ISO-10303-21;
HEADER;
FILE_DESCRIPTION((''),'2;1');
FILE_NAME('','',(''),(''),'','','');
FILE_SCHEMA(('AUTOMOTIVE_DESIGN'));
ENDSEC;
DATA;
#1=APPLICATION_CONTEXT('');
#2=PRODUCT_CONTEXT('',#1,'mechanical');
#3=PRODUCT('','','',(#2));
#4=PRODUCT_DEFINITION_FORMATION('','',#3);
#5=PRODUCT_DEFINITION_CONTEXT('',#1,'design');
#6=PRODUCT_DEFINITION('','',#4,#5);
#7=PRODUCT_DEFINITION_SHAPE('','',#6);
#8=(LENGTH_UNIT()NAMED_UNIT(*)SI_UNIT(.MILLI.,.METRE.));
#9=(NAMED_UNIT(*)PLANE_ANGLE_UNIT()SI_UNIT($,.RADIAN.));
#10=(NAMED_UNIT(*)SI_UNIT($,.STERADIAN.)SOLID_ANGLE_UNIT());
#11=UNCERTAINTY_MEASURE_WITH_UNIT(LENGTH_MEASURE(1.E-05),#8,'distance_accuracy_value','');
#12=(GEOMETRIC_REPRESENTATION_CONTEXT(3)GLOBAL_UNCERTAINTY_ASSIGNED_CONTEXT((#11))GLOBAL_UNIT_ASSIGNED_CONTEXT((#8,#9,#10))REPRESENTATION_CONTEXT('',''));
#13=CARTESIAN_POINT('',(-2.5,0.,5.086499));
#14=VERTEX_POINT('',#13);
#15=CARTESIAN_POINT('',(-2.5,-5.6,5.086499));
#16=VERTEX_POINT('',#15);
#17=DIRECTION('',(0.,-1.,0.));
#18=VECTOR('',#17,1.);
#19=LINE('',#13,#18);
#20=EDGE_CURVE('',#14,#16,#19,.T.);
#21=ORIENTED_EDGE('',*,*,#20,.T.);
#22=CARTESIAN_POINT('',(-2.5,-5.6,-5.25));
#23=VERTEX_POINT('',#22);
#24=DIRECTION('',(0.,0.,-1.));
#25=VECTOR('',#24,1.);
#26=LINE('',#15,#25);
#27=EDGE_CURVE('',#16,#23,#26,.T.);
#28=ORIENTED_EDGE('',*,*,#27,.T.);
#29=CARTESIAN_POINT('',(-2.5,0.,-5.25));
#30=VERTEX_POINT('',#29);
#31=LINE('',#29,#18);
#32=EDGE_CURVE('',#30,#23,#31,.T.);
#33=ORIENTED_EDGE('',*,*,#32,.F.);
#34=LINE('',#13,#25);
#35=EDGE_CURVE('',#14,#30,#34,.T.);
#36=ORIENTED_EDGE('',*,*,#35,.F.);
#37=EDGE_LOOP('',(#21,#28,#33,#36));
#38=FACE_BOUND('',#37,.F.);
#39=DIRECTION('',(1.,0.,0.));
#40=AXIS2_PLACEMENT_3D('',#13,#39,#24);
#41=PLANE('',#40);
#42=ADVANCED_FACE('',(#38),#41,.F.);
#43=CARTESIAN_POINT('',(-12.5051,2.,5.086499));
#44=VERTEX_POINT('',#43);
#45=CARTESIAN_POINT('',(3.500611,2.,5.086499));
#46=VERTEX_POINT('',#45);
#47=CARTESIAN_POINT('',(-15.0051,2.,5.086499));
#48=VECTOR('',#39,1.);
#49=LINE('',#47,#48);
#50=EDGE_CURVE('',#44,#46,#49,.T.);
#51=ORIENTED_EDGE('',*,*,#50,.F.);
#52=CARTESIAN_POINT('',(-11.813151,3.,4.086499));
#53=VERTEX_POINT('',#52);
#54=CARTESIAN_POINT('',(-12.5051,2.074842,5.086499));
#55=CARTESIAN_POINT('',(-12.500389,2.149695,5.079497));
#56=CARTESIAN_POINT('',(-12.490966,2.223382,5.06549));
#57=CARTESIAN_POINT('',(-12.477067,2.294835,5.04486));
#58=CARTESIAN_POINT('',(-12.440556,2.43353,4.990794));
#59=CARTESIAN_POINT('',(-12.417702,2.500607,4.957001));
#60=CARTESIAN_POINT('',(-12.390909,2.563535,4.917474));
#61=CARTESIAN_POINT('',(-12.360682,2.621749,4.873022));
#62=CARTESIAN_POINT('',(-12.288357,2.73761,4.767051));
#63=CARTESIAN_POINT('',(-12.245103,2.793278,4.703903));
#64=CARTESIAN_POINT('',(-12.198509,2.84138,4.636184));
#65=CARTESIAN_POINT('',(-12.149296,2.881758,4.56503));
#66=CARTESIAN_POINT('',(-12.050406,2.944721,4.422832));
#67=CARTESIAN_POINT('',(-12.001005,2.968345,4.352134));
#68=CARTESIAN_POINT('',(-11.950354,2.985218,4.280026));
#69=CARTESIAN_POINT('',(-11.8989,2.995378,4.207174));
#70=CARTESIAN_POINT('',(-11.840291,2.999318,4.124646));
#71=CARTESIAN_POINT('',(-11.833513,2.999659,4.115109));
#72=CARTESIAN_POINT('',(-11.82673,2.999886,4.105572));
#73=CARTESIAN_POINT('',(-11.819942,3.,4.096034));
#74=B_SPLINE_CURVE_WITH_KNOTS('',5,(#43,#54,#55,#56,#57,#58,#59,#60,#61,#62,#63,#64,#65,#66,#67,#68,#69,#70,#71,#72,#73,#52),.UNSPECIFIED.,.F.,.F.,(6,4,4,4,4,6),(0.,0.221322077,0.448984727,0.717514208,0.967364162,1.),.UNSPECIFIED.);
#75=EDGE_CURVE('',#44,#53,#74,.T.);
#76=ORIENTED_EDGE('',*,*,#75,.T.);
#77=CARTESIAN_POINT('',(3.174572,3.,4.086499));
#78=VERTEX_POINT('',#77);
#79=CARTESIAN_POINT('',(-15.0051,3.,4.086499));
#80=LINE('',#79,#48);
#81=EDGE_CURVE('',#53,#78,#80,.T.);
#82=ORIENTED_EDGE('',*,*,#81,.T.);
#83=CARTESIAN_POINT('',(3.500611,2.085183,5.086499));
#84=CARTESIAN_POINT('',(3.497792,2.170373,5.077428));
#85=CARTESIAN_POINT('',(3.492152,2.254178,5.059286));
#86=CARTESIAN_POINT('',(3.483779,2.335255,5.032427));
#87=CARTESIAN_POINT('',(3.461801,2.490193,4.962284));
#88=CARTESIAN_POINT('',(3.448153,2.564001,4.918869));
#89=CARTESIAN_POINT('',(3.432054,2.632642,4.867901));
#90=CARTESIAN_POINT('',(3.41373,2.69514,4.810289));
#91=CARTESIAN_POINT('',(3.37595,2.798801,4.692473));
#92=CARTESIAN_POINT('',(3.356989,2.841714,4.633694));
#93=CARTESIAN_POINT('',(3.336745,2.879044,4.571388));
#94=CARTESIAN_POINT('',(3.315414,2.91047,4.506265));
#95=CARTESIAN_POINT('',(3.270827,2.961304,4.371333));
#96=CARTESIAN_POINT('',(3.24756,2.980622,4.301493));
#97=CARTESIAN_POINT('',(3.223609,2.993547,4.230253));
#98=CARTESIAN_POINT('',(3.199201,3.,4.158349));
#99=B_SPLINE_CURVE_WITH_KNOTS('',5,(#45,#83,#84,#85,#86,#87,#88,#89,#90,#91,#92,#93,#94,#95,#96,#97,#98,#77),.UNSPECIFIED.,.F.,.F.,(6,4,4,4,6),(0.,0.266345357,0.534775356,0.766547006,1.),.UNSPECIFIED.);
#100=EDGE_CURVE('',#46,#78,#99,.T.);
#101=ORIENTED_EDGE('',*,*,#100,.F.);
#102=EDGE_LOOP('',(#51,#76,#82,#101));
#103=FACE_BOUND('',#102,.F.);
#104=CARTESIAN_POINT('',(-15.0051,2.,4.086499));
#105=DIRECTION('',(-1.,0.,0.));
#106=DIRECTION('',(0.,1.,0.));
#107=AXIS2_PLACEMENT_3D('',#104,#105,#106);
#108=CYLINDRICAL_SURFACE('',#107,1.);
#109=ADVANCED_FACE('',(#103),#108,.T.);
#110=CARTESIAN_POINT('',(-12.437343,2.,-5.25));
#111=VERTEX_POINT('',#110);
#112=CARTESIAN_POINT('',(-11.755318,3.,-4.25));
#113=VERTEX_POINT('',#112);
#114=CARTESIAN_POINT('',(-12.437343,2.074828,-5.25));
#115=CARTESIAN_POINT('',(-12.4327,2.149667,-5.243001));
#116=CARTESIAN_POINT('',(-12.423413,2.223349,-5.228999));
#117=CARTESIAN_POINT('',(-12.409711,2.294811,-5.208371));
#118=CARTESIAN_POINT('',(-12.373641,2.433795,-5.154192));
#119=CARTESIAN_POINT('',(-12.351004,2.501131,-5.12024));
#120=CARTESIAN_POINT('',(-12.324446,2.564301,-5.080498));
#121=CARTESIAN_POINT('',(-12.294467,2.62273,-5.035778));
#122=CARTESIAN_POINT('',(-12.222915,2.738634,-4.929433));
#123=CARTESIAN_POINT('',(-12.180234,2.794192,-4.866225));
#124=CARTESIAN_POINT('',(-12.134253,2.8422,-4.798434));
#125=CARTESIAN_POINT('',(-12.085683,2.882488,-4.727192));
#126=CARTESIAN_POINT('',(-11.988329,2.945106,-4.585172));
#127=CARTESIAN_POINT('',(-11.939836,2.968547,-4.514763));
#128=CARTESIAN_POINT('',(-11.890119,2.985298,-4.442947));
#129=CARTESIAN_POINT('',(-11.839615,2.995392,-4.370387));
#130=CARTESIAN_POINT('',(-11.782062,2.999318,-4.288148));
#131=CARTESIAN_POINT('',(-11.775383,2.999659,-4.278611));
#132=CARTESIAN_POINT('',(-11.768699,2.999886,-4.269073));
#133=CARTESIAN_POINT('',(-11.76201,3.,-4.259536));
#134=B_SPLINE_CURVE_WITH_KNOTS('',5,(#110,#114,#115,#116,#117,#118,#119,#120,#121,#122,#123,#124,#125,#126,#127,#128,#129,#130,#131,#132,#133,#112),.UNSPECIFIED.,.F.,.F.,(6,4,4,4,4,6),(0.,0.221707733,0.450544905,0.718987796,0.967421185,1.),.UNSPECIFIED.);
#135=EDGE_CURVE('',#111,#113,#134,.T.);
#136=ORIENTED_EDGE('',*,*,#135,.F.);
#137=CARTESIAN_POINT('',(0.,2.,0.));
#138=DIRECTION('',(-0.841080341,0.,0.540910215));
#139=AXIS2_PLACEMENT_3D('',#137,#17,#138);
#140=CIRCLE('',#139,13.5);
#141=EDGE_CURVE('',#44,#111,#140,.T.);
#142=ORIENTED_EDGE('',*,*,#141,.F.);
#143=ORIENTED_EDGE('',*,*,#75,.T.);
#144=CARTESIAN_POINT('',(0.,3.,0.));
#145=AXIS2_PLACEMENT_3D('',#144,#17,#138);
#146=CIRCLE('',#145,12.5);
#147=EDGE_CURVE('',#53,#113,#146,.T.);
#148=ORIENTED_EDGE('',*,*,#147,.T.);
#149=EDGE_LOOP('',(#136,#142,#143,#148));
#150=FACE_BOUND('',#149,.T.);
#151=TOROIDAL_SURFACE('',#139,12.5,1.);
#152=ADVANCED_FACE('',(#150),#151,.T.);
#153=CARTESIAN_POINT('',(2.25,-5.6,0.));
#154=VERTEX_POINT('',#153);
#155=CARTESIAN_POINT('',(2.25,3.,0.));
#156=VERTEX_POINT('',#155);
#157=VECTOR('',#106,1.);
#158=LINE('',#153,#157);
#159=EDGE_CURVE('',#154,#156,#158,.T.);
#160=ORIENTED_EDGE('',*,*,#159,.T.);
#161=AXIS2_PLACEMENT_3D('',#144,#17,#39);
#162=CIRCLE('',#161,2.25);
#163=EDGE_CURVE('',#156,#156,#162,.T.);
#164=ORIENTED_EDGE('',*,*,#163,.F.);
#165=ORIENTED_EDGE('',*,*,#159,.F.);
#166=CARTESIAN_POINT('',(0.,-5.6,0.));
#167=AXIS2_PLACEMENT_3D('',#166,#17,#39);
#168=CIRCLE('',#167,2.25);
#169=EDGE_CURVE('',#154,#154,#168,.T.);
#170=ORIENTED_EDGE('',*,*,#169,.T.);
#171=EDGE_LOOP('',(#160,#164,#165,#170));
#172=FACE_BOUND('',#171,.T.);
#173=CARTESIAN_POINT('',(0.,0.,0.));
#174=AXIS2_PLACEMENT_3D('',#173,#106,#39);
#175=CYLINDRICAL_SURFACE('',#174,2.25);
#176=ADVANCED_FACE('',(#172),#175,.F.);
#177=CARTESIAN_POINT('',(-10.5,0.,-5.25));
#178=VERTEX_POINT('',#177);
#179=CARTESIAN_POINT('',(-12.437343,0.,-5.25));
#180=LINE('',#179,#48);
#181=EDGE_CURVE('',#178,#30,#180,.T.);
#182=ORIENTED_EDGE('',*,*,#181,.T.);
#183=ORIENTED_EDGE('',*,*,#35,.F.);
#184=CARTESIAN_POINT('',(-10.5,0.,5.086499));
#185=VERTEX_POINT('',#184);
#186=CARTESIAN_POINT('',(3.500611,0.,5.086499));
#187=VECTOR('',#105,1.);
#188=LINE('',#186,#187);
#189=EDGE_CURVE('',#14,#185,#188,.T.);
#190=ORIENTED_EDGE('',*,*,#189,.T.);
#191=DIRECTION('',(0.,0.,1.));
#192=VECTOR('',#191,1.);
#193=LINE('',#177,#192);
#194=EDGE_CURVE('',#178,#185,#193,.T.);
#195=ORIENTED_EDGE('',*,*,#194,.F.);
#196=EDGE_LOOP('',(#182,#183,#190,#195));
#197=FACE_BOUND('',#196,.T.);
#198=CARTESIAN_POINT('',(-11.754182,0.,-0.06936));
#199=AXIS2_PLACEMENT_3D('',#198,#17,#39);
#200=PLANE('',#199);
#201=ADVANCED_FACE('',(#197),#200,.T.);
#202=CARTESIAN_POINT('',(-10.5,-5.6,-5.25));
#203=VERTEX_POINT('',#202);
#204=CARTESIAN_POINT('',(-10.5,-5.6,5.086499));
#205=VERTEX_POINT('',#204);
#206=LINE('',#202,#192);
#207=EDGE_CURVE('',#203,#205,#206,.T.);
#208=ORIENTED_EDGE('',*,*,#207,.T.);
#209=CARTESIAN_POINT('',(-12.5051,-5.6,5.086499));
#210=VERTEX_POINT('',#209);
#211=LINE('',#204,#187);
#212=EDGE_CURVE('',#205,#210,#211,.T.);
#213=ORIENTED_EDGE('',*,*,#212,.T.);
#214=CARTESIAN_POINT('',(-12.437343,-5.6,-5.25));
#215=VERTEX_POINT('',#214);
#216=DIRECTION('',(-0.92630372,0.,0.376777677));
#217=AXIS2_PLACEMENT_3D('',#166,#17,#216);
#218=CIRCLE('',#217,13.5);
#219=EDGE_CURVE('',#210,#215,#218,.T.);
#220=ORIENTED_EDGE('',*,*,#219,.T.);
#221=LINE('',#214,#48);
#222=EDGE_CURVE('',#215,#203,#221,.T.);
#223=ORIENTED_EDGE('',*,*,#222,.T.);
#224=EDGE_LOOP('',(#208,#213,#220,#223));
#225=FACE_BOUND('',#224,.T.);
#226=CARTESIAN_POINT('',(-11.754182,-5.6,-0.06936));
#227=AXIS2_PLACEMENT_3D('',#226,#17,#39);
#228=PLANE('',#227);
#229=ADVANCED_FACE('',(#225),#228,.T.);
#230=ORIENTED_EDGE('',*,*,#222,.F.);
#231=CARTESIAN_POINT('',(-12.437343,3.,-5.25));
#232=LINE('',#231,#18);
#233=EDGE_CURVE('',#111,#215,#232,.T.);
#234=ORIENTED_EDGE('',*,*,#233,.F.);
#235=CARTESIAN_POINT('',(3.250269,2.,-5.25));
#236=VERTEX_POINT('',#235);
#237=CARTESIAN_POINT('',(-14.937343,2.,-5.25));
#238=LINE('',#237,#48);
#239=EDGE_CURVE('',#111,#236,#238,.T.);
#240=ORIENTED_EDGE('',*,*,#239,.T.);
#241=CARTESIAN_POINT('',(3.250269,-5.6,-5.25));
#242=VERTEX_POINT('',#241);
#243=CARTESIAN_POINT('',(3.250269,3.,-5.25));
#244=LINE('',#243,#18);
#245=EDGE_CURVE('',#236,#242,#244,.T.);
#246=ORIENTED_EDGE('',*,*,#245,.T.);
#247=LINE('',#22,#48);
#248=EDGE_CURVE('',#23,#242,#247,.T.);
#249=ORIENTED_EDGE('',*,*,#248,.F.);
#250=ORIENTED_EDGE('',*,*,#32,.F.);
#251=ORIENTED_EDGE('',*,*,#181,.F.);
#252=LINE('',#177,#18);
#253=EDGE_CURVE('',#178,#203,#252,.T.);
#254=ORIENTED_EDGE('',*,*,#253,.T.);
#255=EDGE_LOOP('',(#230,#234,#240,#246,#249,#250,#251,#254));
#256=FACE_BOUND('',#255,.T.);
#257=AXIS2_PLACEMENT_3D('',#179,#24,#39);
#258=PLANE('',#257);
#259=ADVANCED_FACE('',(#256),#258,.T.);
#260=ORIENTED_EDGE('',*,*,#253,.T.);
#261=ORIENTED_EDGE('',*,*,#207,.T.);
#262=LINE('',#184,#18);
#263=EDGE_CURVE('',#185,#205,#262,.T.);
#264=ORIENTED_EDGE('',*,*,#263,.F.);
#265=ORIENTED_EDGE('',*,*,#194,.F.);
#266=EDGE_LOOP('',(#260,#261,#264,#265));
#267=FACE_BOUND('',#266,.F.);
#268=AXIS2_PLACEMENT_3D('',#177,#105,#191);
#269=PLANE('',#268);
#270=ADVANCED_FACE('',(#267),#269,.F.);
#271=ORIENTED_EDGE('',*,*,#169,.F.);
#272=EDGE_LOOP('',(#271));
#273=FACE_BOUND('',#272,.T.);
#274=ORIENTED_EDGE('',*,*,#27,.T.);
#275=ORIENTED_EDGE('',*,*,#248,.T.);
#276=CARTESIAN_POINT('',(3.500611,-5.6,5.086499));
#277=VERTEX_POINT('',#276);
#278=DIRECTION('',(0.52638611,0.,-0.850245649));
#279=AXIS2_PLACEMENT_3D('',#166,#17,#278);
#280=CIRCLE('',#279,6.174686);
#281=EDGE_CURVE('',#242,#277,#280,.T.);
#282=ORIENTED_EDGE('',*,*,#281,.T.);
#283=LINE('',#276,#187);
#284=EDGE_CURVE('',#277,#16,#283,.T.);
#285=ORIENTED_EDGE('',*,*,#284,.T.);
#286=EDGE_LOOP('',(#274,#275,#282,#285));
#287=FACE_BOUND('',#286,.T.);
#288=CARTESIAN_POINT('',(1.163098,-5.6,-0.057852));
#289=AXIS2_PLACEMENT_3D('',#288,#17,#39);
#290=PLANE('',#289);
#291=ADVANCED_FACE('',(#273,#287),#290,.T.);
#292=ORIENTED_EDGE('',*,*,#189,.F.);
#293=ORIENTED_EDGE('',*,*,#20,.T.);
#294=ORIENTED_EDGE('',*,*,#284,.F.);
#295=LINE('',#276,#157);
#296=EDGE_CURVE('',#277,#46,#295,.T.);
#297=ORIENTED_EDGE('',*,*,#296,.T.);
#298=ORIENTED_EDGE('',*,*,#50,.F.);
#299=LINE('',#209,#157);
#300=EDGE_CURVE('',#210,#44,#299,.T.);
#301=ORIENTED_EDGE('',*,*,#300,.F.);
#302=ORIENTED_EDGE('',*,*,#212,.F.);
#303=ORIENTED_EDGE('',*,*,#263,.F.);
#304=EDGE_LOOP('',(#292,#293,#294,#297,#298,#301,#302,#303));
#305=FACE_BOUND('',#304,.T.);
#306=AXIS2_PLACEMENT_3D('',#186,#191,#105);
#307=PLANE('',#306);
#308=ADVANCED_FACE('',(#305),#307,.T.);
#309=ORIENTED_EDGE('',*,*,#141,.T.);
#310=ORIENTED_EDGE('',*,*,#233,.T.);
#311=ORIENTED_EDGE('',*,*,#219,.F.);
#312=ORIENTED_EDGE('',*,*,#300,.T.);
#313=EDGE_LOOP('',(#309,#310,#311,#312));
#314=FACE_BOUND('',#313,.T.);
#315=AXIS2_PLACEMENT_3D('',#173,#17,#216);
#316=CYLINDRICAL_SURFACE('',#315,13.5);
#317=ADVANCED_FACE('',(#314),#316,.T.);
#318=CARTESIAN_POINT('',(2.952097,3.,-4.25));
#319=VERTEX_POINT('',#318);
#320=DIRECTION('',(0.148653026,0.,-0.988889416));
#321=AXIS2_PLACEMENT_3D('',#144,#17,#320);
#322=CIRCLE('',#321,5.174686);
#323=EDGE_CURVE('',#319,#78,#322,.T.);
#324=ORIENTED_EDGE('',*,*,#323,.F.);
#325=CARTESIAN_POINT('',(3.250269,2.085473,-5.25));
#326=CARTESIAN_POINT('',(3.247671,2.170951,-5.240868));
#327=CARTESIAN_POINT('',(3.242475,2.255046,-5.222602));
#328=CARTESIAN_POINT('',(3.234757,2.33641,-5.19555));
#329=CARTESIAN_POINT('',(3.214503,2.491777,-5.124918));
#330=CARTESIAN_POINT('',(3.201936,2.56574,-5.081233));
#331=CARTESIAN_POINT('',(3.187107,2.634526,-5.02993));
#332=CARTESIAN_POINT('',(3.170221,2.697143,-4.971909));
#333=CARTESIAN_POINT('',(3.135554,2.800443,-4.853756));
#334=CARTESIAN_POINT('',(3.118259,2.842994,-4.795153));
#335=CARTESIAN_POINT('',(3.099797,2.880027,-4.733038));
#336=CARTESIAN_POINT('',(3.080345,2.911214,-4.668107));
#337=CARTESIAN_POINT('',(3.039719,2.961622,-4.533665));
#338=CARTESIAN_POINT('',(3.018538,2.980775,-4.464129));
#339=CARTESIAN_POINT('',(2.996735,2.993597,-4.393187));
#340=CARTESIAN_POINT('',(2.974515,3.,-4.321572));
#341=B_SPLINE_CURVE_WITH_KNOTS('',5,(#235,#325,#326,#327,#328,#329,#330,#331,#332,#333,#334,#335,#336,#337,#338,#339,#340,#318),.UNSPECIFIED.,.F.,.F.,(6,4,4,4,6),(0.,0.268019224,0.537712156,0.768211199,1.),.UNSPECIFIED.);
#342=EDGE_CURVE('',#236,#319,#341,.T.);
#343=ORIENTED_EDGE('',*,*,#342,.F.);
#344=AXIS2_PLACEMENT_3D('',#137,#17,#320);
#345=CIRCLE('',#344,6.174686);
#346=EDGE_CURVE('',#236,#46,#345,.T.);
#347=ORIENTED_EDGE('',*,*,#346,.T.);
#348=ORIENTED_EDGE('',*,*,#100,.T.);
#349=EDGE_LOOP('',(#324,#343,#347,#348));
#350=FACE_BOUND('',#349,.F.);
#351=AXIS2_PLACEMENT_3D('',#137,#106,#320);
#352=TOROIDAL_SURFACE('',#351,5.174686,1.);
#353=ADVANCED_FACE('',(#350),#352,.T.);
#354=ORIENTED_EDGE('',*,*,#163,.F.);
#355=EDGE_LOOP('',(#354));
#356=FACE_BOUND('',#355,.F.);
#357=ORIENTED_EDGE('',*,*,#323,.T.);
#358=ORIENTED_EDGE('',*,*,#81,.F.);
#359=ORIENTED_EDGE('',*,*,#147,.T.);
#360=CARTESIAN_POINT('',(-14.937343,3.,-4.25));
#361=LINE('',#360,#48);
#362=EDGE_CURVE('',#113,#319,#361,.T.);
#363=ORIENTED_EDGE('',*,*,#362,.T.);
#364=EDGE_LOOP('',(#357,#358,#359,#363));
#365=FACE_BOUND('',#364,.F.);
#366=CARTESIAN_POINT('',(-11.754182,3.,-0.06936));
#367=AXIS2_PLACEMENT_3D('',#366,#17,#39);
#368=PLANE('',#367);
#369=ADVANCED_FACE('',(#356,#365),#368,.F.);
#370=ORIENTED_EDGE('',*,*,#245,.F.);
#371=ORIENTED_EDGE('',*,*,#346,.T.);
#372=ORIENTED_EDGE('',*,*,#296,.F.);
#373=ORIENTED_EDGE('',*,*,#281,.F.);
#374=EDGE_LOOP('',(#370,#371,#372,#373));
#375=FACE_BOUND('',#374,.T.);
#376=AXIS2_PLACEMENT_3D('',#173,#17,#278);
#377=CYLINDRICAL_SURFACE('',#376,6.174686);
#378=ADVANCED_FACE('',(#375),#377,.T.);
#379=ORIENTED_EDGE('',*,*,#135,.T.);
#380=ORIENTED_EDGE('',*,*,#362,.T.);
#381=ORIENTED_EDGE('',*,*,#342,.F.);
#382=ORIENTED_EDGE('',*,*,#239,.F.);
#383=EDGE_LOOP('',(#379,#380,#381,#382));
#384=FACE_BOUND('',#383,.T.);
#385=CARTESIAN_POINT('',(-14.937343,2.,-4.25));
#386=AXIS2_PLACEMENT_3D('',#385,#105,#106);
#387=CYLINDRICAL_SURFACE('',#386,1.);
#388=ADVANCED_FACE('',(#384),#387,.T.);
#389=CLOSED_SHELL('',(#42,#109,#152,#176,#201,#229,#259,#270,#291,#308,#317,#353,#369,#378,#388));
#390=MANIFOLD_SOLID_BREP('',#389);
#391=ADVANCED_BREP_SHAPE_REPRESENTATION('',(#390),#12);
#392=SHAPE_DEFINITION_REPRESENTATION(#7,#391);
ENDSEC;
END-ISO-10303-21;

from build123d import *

# Parameters (mm, degrees)
F1_DEPTH    = 5.6
F0_R        = 2.25
F0_W        = 8
F0_H        = 10.336498642
F2_DEPTH    = 3
F3_T1_DEPTH = 20.6876119668
F3_T3_DEPTH = 21.0057116197
F3_T6_ANGLE = 66.24239892
F3_T8_ANGLE = 176.3763770041


# Not quite as in the source:
# - a fillet or chamfer that OpenCascade refuses, or shapes differently, is made with other operations: its cross-section is extruded or revolved along the edge and cut away or added


with BuildPart() as f1:
    # F0 (on Front) → F1 (new body)
    with BuildSketch(Plane.XZ):
        with BuildLine():
            Line((-10.5, 5.086498642), (-12.5051002221, 5.086498642))
            ThreePointArc((-12.5051002221, 5.086498642), (-13.4997099623, -0.0884925705), (-12.4373429638, -5.25))
            Line((-12.4373429638, -5.25), (-10.5, -5.25))
            Line((-10.5, -5.25), (-10.5, 5.086498642))
        make_face()
    extrude(amount=F1_DEPTH)



with BuildPart() as f1b:
    # F0 (on Front) → F1, piece 2 (new body)
    with BuildSketch(Plane.XZ):
        with BuildLine():
            Line((3.5006113976, 5.086498642), (-2.5, 5.086498642))
            Line((-2.5, 5.086498642), (-2.5, -5.25))
            Line((-2.5, -5.25), (3.2502690029, -5.25))
            ThreePointArc((3.2502690029, -5.25), (6.1728759577, -0.1495025156), (3.5006113976, 5.086498642))
        make_face()
        Circle(F0_R, mode=Mode.SUBTRACT)
    extrude(amount=F1_DEPTH)


with BuildPart() as f1_1:
    add(f1.part)

    add(f1b.part)  # F2 merges F1b
    # F0 (on Front) → F2 (join)
    with BuildSketch(Plane.XZ):
        with BuildLine():
            Line((-10.5, 5.086498642), (-12.5051002221, 5.086498642))
            ThreePointArc((-12.5051002221, 5.086498642), (-13.4997099623, -0.0884925705), (-12.4373429638, -5.25))
            Line((-12.4373429638, -5.25), (-10.5, -5.25))
            Line((-10.5, -5.25), (-10.5, 5.086498642))
        make_face()
        with Locations((-6.5, -0.081750679)):
            Rectangle(F0_W, F0_H)
        with BuildLine():
            Line((3.5006113976, 5.086498642), (-2.5, 5.086498642))
            Line((-2.5, 5.086498642), (-2.5, -5.25))
            Line((-2.5, -5.25), (3.2502690029, -5.25))
            ThreePointArc((3.2502690029, -5.25), (6.1728759577, -0.1495025156), (3.5006113976, 5.086498642))
        make_face()
        Circle(F0_R, mode=Mode.SUBTRACT)
    extrude(amount=-F2_DEPTH)

    # F3: fillet of radius 1 on 4 edges, made by hand

    # F3_s2 → F3_t1 (cut)
    with BuildSketch(Plane.YZ.offset(-14.9373429638)):
        with BuildLine():
            ThreePointArc((3, -4.25), (2.7071067812, -4.9571067812), (2, -5.25))
            Line((2, -5.25), (3, -5.25))
            Line((3, -5.25), (3, -4.25))
        make_face()
    extrude(amount=F3_T1_DEPTH, mode=Mode.SUBTRACT)

    # F3_s4 → F3_t3 (cut)
    with BuildSketch(Plane.YZ.offset(-15.0051002221)):
        with BuildLine():
            ThreePointArc((3, 4.086498642), (2.7071067812, 4.7936054231), (2, 5.086498642))
            Line((2, 5.086498642), (3, 5.086498642))
            Line((3, 5.086498642), (3, 4.086498642))
        make_face()
    extrude(amount=F3_T3_DEPTH, mode=Mode.SUBTRACT)

    # F3_s5 → F3_t6 (revolve, cut)
    with BuildSketch(Plane(origin=(0, 0, 0), x_dir=(0, 1, 0), z_dir=(0.5409102149, 0, 0.8410803406))):
        with BuildLine():
            ThreePointArc((3, 12.5), (2.7071067812, 13.2071067812), (2, 13.5))
            Line((2, 13.5), (3, 13.5))
            Line((3, 13.5), (3, 12.5))
        make_face()
    revolve(axis=Axis((0, 3, 0), (0, -1, 0)), revolution_arc=F3_T6_ANGLE, mode=Mode.SUBTRACT)

    # F3_s7 → F3_t8 (revolve, cut)
    with BuildSketch(Plane(origin=(0, 0, 0), x_dir=(0, 1, 0), z_dir=(-0.9888894164, 0, -0.148653026))):
        with BuildLine():
            ThreePointArc((2, 6.1746861128), (2.7071067812, 5.881792894), (3, 5.1746861128))
            Line((3, 5.1746861128), (3, 6.1746861128))
            Line((3, 6.1746861128), (2, 6.1746861128))
        make_face()
    revolve(axis=Axis((0, 3, 0), (0, -1, 0)), revolution_arc=F3_T8_ANGLE, mode=Mode.SUBTRACT)


solid = f1_1.part
